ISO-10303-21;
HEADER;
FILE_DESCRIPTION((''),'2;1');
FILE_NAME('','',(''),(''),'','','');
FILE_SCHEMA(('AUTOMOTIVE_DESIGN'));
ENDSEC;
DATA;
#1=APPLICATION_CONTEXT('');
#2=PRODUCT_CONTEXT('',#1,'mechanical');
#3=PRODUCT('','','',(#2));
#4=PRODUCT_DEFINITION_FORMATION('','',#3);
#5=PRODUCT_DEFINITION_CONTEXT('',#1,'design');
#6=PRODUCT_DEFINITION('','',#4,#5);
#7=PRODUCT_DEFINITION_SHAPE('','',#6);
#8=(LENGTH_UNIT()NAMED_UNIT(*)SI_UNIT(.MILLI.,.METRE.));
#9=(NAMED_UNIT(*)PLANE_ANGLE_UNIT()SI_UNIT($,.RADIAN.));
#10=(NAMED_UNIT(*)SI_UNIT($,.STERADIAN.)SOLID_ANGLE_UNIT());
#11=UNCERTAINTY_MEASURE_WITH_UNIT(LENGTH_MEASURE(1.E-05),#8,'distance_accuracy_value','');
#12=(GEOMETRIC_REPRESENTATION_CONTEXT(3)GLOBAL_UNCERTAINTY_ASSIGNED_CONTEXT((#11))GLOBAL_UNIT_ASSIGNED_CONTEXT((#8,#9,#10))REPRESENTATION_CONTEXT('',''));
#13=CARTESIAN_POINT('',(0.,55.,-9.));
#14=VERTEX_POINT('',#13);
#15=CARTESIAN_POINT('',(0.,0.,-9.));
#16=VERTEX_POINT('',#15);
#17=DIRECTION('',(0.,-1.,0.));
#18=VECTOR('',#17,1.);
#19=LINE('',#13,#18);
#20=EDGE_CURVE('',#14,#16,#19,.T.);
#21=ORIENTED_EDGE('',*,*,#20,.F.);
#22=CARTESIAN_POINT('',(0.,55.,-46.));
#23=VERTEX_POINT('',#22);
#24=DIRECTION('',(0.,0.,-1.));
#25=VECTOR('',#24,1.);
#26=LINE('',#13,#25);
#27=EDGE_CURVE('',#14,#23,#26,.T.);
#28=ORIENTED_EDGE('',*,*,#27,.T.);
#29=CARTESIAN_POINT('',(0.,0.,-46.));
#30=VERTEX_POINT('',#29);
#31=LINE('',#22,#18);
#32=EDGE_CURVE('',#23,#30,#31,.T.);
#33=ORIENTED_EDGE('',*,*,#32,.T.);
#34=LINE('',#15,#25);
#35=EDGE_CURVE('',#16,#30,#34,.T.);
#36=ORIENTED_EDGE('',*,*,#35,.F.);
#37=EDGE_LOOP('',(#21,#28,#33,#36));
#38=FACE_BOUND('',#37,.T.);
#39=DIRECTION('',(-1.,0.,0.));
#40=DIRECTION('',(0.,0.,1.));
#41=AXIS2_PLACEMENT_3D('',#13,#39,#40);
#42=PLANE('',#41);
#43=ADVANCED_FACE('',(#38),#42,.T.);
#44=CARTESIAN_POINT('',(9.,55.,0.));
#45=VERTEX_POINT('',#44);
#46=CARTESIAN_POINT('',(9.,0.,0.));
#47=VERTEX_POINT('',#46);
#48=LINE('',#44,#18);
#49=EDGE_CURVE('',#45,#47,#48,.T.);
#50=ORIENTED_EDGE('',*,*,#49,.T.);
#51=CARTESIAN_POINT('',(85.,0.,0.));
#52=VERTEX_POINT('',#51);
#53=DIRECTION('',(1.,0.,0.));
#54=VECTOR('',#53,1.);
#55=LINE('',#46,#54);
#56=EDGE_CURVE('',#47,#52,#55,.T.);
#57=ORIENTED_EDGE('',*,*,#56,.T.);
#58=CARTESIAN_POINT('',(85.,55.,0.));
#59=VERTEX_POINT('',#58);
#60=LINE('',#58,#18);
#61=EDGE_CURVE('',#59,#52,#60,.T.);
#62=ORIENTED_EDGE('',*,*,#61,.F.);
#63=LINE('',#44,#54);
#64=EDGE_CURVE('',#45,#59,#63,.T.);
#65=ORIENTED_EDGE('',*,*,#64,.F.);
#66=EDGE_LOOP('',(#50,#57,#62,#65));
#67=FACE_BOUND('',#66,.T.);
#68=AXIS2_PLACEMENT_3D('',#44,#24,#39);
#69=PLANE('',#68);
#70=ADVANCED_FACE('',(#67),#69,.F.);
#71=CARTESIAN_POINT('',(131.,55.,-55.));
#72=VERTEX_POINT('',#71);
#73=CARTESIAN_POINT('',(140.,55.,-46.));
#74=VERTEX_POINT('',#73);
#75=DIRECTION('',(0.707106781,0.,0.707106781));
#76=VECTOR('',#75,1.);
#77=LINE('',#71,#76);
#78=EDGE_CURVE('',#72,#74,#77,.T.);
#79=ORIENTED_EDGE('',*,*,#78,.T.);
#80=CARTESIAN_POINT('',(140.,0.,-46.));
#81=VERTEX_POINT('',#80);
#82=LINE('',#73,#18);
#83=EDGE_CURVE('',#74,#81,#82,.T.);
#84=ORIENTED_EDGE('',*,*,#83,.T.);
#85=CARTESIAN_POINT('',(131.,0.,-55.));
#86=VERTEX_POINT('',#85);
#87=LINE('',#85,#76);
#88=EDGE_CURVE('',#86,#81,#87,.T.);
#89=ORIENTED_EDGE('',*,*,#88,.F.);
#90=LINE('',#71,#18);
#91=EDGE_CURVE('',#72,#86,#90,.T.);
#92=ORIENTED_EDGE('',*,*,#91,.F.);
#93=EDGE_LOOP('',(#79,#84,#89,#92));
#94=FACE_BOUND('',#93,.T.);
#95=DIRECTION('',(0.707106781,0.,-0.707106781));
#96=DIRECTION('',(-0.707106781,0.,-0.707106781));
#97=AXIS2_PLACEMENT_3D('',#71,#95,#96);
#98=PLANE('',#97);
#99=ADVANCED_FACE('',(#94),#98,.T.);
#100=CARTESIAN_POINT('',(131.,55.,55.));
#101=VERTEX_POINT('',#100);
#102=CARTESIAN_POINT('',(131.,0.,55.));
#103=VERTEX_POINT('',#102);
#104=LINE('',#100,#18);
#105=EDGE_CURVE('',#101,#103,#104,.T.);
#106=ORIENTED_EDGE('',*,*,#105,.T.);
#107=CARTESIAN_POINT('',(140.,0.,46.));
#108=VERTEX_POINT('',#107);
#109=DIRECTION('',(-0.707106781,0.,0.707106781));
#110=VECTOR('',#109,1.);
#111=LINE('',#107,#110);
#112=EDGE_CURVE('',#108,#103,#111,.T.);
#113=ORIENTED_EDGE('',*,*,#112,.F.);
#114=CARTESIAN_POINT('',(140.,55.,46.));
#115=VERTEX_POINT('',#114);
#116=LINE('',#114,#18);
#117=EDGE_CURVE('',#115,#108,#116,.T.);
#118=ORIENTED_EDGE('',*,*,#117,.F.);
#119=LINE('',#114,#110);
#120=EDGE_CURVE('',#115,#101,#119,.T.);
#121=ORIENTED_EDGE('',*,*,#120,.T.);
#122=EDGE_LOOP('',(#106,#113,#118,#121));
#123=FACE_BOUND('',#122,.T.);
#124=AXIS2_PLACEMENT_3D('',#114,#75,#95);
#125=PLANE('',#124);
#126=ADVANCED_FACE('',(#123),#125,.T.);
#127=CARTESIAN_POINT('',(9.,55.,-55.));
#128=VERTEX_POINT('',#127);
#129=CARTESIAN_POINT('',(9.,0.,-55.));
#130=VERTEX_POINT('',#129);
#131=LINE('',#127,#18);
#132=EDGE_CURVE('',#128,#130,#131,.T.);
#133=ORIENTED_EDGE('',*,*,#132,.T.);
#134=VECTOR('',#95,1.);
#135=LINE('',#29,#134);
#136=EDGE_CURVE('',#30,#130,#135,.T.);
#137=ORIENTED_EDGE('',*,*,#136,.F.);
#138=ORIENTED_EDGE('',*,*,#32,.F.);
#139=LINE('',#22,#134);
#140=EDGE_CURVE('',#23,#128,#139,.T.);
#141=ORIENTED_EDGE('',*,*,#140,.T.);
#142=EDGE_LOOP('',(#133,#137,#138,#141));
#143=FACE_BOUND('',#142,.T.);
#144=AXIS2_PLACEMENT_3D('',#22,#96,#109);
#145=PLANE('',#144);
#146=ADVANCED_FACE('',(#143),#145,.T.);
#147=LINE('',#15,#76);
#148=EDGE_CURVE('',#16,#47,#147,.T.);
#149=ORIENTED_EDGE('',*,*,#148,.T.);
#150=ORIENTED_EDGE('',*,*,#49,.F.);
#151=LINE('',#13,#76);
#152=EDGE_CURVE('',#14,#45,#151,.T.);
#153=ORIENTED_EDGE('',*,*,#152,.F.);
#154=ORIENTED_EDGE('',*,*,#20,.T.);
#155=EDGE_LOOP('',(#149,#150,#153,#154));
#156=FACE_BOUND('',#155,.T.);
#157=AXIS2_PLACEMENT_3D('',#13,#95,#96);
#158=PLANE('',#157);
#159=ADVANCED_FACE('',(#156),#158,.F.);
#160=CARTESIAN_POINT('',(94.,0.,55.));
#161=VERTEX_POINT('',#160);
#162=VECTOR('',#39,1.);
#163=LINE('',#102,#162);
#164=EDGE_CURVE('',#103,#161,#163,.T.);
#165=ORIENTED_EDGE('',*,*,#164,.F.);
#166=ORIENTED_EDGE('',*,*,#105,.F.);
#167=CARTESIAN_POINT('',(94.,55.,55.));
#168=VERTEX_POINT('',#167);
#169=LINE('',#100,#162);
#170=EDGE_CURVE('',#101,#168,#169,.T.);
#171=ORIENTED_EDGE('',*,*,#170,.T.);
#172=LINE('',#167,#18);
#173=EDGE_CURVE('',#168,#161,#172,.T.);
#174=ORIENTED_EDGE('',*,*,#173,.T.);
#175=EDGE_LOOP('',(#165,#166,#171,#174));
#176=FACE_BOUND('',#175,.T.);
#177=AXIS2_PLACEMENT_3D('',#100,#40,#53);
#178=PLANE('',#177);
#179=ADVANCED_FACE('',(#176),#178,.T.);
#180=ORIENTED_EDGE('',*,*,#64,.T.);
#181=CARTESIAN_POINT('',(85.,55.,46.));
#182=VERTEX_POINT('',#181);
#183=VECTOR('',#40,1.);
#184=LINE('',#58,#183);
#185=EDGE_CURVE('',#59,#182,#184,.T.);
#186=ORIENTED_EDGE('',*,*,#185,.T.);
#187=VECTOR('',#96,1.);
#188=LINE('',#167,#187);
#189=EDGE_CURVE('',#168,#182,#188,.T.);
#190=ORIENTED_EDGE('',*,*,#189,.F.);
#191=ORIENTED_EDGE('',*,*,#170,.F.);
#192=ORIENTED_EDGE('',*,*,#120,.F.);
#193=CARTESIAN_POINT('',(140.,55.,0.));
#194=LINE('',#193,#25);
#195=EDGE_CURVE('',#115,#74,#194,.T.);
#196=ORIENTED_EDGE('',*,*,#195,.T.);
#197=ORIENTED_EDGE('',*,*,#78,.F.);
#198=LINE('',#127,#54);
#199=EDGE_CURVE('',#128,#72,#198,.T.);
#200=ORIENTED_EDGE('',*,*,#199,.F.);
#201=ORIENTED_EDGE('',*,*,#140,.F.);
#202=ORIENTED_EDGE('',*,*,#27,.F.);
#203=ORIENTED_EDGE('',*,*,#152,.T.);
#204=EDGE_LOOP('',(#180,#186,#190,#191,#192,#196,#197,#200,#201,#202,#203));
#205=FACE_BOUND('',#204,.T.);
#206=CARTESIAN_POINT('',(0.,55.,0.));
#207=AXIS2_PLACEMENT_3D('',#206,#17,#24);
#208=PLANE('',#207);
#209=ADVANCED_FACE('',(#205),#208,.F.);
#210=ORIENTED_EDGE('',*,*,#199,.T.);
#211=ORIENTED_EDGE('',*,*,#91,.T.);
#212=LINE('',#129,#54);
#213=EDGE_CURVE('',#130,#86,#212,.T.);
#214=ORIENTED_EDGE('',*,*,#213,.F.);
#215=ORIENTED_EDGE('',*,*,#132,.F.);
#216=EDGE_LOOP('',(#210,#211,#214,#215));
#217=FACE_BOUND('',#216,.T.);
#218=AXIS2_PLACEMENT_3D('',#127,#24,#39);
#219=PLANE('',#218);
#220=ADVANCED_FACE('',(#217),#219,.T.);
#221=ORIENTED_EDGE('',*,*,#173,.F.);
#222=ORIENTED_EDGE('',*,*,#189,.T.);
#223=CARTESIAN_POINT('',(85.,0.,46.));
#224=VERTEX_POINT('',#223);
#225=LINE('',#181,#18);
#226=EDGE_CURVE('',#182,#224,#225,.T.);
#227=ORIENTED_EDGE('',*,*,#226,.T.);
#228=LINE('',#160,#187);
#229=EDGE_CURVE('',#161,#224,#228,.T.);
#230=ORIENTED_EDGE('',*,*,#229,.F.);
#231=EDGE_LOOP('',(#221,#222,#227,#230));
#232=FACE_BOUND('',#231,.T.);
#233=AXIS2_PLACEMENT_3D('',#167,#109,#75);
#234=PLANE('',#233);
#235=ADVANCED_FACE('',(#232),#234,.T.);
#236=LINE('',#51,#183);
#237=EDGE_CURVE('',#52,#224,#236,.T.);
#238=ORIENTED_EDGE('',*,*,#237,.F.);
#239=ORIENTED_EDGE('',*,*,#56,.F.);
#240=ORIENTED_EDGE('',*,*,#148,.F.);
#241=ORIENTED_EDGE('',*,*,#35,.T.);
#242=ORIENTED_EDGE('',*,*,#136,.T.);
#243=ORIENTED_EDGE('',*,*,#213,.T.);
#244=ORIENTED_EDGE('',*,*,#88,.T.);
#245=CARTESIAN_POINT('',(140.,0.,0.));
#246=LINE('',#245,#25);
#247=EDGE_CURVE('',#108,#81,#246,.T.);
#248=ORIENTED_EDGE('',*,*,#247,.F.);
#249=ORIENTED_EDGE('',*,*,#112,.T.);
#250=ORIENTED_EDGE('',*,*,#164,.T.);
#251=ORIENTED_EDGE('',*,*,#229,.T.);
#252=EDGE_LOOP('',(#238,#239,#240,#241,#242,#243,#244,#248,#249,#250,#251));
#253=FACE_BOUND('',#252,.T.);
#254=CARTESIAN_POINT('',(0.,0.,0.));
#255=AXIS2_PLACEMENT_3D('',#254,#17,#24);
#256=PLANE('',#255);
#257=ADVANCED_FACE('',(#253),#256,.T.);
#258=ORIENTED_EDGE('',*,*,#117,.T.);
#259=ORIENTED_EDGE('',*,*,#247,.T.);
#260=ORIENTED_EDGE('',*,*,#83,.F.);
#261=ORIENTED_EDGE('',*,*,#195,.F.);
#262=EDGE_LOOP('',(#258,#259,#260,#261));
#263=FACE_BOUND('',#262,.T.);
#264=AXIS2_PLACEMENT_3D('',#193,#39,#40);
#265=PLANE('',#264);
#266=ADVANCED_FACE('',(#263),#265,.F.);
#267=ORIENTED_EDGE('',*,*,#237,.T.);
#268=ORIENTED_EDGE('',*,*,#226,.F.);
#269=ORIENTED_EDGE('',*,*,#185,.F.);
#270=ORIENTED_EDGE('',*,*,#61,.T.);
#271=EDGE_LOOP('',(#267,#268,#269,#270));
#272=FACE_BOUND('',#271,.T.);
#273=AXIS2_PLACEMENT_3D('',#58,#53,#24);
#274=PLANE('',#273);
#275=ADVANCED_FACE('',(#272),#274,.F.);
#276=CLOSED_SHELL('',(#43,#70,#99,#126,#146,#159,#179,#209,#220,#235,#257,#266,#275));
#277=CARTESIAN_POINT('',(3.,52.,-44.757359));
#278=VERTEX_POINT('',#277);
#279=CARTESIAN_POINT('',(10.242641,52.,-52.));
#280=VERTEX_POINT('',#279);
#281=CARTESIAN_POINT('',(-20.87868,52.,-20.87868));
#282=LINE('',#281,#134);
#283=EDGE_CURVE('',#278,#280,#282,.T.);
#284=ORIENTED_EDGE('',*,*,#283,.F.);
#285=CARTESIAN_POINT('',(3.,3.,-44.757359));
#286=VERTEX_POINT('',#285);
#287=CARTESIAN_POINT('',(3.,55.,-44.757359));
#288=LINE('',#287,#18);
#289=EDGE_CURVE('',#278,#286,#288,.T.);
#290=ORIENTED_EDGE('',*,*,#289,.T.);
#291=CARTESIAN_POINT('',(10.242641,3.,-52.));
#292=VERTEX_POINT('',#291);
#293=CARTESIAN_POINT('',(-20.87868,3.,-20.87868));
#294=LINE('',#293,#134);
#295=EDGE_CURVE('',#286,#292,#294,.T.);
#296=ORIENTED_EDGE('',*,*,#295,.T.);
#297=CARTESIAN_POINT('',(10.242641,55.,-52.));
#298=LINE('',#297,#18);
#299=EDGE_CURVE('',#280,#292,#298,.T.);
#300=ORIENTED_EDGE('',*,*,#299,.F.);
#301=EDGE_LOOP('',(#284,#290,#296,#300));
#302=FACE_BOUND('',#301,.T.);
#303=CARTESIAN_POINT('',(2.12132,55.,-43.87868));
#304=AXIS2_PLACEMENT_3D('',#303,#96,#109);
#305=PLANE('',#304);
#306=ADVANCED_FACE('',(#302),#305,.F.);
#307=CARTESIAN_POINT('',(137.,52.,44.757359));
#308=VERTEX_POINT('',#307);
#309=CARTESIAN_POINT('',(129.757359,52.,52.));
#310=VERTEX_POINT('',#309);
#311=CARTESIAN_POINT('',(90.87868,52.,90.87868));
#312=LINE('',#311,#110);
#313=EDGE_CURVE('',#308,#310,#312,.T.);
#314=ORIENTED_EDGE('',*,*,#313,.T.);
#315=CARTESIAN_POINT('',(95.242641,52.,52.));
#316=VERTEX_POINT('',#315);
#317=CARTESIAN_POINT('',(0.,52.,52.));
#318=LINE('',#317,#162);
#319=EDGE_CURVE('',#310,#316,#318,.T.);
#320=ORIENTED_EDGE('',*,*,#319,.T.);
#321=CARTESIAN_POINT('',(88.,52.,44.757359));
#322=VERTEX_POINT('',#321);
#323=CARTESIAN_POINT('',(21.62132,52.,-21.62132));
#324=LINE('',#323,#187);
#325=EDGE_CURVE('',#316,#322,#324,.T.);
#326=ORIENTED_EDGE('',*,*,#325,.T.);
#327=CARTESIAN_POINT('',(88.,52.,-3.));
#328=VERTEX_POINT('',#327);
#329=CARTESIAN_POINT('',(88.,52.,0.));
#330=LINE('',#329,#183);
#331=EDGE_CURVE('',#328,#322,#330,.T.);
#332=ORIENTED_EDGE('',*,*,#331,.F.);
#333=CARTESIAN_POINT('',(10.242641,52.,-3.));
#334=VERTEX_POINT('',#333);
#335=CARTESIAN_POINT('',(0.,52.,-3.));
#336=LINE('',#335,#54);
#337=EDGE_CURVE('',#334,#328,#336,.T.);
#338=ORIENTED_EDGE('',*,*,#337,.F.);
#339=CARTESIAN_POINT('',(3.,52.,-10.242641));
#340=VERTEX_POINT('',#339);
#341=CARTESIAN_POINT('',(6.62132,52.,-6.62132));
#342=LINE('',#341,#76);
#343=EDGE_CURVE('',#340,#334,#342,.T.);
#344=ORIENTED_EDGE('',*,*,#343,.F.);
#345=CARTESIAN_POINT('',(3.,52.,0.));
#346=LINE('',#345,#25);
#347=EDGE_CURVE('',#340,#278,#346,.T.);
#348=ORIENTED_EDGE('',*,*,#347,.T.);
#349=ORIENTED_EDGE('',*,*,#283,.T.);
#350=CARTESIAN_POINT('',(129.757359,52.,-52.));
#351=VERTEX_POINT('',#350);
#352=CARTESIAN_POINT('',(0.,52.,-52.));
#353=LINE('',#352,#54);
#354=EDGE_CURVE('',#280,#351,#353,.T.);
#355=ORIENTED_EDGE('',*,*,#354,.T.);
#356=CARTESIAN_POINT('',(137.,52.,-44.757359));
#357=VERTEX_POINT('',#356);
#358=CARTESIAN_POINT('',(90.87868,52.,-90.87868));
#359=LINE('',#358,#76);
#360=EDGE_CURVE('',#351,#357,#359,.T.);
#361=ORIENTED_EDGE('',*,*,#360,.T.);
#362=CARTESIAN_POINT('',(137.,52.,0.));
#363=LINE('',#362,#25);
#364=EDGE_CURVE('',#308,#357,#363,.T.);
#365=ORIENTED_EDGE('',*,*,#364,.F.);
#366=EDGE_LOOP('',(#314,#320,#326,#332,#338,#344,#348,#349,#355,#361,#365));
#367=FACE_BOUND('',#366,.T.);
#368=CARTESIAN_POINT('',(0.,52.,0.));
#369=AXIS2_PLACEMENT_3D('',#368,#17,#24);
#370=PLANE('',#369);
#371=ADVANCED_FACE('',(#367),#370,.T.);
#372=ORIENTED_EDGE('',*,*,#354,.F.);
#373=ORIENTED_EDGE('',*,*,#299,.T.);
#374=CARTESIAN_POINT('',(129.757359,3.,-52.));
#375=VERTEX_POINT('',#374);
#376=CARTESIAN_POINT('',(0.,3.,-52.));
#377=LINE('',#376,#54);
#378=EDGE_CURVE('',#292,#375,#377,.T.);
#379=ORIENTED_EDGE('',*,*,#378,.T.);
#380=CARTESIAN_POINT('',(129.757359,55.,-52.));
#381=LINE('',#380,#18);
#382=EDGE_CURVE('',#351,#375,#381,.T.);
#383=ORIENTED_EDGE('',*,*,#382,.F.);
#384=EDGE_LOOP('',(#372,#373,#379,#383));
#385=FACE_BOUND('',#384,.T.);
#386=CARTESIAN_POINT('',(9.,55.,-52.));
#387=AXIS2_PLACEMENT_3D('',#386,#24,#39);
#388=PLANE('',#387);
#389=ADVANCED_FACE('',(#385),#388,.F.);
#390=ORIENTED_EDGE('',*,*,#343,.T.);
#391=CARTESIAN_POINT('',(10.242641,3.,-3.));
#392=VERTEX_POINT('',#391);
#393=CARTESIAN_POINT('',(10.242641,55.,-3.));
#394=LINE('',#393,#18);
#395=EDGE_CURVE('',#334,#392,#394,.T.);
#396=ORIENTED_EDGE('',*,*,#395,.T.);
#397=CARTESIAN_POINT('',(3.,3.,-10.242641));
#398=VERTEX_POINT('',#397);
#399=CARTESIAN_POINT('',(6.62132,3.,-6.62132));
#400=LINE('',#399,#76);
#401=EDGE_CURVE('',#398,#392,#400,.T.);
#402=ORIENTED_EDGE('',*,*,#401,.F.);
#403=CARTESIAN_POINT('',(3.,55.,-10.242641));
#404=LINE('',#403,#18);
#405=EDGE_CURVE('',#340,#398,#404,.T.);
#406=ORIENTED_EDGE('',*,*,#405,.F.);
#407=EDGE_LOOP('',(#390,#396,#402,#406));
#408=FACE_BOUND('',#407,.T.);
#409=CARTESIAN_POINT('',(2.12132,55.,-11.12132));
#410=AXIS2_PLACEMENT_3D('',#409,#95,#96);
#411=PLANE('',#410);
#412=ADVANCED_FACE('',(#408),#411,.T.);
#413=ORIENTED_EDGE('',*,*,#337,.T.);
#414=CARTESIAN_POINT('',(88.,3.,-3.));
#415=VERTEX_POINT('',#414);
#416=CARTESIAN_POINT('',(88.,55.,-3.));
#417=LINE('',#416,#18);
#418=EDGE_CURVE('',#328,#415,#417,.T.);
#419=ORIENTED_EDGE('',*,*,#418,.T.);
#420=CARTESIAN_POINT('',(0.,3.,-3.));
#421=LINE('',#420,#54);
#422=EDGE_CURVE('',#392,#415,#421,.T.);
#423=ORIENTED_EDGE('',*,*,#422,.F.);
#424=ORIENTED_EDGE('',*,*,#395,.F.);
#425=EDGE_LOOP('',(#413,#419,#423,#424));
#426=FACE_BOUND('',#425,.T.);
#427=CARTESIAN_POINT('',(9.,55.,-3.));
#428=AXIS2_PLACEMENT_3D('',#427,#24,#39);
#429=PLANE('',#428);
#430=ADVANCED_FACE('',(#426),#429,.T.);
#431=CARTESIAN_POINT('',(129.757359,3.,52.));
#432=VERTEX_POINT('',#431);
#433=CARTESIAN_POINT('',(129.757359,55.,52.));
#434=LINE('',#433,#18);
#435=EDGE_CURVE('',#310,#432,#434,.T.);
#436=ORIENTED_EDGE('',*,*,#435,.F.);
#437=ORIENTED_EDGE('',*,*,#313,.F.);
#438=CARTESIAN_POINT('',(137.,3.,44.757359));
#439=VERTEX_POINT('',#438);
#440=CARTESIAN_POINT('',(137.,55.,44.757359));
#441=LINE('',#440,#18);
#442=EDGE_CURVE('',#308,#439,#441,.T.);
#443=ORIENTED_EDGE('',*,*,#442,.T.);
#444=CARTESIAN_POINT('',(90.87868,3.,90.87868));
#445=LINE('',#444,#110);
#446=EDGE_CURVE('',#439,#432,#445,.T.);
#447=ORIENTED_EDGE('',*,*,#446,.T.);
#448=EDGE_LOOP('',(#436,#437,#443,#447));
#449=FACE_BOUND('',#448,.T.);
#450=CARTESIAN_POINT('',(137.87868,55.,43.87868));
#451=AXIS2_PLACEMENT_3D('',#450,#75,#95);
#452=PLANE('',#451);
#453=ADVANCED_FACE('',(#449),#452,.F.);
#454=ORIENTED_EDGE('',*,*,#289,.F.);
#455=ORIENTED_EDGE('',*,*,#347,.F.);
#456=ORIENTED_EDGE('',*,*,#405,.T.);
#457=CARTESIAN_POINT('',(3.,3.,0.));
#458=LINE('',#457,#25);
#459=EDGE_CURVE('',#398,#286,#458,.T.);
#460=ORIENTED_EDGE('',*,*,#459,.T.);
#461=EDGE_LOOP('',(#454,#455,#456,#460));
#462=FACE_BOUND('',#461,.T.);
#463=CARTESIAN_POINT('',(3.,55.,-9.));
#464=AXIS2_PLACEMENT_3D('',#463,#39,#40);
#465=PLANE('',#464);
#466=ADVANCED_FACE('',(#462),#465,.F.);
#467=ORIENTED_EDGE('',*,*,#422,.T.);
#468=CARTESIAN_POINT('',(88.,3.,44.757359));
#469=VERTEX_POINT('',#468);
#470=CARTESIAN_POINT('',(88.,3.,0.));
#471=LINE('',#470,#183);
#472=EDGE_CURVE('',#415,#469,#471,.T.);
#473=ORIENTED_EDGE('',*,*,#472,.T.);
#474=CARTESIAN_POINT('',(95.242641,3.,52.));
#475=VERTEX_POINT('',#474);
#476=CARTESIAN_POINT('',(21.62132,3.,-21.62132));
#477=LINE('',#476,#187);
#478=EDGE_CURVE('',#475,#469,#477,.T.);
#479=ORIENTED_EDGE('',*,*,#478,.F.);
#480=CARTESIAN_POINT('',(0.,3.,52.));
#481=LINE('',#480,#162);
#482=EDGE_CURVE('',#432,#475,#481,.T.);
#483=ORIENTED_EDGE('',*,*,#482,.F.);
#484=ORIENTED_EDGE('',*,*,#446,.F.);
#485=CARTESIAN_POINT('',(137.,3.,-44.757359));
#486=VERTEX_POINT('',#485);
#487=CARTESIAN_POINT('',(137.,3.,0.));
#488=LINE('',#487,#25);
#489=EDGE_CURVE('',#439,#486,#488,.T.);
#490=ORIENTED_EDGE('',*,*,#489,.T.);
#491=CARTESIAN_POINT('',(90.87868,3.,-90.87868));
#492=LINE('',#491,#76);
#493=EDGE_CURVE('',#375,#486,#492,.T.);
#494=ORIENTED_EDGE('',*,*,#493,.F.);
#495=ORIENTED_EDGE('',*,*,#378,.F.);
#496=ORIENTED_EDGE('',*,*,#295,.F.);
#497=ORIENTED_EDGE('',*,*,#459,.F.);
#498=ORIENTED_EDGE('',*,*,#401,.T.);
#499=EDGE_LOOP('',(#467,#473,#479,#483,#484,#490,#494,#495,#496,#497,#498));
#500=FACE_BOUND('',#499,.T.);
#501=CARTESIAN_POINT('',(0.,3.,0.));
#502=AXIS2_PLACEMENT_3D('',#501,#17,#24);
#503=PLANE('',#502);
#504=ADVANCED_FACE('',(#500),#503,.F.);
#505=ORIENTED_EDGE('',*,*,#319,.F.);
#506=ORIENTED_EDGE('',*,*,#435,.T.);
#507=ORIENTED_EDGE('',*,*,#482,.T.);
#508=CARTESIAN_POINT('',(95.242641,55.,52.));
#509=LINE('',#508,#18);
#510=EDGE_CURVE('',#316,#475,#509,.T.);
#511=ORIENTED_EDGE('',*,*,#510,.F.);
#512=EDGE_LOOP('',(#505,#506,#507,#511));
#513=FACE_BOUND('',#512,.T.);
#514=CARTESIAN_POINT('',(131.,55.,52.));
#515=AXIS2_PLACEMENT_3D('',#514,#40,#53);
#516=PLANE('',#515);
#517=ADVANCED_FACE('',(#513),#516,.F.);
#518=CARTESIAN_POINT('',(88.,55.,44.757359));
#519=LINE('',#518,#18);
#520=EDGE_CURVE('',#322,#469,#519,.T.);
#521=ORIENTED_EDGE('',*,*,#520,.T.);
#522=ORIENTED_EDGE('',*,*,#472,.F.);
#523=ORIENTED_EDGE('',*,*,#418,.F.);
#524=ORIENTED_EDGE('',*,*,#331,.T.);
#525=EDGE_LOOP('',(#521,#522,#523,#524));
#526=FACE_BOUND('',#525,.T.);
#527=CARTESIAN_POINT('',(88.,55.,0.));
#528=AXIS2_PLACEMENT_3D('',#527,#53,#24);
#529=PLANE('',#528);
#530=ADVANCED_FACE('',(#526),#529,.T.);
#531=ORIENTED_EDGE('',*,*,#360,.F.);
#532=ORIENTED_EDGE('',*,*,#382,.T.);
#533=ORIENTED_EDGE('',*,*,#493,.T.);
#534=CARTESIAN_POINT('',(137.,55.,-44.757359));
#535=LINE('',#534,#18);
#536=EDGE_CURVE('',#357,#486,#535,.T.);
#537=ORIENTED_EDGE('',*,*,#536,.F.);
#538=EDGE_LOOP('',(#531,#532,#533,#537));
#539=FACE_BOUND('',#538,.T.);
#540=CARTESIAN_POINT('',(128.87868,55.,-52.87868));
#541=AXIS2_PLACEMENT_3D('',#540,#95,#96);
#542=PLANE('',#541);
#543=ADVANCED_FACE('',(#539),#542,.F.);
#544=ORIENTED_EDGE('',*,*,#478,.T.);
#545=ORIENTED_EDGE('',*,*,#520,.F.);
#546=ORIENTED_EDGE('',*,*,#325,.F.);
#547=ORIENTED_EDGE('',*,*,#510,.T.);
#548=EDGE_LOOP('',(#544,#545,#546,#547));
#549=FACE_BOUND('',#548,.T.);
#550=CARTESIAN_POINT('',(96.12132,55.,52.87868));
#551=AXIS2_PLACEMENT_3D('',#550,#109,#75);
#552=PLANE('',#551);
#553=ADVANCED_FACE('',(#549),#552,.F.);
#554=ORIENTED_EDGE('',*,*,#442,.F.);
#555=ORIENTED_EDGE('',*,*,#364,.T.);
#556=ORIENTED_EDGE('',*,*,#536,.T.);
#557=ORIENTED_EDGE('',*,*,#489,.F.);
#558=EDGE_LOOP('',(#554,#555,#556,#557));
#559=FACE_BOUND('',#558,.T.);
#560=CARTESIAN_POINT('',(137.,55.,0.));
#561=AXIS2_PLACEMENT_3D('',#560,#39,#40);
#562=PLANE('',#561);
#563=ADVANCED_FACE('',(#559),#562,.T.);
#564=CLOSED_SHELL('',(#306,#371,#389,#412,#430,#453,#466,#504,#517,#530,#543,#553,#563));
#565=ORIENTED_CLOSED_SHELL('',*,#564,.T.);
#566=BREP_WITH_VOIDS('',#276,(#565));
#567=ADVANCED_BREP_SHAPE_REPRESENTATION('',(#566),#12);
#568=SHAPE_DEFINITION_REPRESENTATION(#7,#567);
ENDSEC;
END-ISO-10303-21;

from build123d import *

# Parameters (mm, degrees)
BOSS_EXTRUDE1_DEPTH = 55
SHELL1_START        = 3
SHELL1_DEPTH        = 49


# Read off the part's stored shape, not the designer's step: Shell1
with BuildPart() as part:
    # Sketch2 → Boss-Extrude1 (new body)
    with BuildSketch(Plane(origin=(0, 0, 0), x_dir=(1, 0, 0), z_dir=(0, 1, 0))):
        Polygon((9, 55), (0, 46), (0, 9), (9, 0), (85, 0), (140, 0), (140, 46), (131, 55), align=None)
        Polygon((140, 0), (85, 0), (85, -46), (94, -55), (131, -55), (140, -46), align=None)
    extrude(amount=BOSS_EXTRUDE1_DEPTH)

    # Shell1 outline → Shell1 (cut)
    with BuildSketch(Plane(origin=(0, 0, 0), x_dir=(1, 0, 0), z_dir=(0, 1, 0)).offset(SHELL1_START)):
        Polygon((10.242640687, 3), (88, 3), (88, -44.757359313), (95.242640687, -52), (129.757359313, -52), (137, -44.757359313), (137, 44.757359313), (129.757359313, 52), (10.242640687, 52), (3, 44.757359313), (3, 10.242640687), align=None)
    extrude(amount=SHELL1_DEPTH, mode=Mode.SUBTRACT)


solid = part.part
